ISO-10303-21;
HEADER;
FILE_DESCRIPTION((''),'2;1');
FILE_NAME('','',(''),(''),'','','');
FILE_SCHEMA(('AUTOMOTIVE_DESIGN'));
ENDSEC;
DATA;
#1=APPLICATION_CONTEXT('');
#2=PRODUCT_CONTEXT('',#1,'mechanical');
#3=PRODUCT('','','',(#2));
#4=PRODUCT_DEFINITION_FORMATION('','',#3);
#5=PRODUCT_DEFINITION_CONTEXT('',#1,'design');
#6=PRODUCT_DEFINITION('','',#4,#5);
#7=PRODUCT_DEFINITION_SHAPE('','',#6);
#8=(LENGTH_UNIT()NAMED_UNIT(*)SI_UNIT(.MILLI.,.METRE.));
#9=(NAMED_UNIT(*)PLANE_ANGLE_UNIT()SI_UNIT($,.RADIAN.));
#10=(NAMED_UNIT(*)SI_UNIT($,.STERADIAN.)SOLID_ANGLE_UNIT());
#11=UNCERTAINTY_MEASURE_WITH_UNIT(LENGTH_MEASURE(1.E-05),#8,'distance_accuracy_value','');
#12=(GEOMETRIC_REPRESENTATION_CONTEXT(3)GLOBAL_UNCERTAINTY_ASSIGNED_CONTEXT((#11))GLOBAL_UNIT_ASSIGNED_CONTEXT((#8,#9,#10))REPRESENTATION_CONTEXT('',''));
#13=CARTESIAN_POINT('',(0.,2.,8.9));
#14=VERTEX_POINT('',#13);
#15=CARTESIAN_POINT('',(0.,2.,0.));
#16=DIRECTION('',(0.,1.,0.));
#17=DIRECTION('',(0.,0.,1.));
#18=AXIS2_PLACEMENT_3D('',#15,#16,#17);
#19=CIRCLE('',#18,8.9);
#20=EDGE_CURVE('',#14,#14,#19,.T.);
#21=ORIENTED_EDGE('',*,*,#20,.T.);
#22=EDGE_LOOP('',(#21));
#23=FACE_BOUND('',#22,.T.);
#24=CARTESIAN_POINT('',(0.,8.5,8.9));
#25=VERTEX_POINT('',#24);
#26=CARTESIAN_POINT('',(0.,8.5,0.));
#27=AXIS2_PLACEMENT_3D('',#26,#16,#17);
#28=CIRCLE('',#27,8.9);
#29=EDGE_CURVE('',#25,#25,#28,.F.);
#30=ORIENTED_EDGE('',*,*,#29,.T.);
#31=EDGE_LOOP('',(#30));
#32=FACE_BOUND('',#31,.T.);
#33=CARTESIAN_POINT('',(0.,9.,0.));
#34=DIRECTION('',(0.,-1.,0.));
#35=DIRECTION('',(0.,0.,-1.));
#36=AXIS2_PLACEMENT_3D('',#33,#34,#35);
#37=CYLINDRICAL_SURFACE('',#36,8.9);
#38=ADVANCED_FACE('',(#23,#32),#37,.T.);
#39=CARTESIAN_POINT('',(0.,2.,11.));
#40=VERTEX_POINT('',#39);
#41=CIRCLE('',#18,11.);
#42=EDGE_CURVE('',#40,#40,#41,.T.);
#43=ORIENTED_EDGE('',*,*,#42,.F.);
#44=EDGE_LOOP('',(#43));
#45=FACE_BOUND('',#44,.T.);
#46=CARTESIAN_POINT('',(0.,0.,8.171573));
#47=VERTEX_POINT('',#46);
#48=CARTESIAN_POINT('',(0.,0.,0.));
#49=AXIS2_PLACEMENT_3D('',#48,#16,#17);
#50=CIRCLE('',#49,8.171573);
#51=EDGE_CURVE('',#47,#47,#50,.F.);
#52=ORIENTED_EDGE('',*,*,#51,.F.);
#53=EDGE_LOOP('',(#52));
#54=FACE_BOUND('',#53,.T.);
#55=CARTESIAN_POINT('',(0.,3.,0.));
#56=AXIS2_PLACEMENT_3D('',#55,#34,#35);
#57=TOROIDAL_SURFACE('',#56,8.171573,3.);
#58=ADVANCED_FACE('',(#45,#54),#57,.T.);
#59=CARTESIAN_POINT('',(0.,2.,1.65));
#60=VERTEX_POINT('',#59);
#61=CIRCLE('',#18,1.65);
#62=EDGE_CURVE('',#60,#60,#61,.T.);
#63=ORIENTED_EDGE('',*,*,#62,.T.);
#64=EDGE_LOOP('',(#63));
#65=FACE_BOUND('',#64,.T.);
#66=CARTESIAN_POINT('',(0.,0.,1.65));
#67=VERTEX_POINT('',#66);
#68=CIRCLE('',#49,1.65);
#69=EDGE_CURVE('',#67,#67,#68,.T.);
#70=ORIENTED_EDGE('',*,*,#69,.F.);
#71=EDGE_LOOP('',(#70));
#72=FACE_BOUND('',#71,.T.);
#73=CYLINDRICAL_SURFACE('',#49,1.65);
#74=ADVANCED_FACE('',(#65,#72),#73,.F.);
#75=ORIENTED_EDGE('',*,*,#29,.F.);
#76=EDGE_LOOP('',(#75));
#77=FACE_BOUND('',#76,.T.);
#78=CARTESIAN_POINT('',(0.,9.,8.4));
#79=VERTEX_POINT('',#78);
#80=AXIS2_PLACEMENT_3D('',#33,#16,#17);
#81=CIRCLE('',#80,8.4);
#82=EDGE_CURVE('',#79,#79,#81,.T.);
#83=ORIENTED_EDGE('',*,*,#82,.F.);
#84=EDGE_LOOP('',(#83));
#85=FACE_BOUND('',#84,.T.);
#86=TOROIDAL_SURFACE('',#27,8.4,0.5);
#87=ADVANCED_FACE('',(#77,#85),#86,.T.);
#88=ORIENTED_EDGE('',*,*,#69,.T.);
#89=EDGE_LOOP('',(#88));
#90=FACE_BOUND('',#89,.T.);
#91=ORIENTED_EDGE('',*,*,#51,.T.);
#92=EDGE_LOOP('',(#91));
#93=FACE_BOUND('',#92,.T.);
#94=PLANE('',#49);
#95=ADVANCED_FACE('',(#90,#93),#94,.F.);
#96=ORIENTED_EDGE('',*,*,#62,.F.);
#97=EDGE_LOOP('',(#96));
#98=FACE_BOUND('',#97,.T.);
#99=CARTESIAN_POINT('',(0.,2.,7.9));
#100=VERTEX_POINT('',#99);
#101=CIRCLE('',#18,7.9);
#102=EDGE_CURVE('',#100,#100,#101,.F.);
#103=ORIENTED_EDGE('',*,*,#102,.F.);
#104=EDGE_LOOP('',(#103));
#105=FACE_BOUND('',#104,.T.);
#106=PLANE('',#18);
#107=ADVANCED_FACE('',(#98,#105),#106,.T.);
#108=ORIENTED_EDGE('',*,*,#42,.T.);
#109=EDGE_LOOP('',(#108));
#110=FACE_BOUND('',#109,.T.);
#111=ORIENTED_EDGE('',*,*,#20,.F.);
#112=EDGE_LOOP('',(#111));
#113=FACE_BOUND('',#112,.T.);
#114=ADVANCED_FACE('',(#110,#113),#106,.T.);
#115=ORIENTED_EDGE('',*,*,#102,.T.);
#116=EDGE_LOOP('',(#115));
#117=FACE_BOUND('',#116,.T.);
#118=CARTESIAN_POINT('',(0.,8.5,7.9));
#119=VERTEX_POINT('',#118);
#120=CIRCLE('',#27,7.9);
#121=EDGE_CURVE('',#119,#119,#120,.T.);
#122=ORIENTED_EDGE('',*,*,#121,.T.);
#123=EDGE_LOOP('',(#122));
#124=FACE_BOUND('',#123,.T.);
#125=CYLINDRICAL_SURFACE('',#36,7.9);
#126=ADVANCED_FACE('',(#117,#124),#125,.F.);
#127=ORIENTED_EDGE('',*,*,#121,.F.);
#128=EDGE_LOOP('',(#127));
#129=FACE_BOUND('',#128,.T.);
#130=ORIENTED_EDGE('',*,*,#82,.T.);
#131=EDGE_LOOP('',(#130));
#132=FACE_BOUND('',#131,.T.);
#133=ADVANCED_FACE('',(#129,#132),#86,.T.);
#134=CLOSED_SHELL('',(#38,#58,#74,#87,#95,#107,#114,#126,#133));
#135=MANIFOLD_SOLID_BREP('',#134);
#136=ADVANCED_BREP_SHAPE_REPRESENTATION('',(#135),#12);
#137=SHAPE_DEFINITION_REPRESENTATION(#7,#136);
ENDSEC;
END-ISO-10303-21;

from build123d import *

# Parameters (mm, degrees)
SKETCH1_R           = 11
BOSS_EXTRUDE1_DEPTH = 2
SKETCH2_R           = 8.9
SKETCH2_R_2         = 7.9
BOSS_EXTRUDE2_DEPTH = 7
SKETCH3_R           = 1.65
CUT_EXTRUDE1_DEPTH  = 18.058722109
FILLET1_R           = 3
FILLET2_R           = 0.5


# Some blends are built 0.0001 mm under size
with BuildPart() as part:
    # Sketch1 → Boss-Extrude1 (new body)
    with BuildSketch(Plane(origin=(0, 0, 0), x_dir=(1, 0, 0), z_dir=(0, 1, 0))):
        with Locations(Location((0, 0, 0), (0, 0, 270))):
            Circle(SKETCH1_R)
    extrude(amount=BOSS_EXTRUDE1_DEPTH)

    # Sketch2 → Boss-Extrude2 (add)
    with BuildSketch(Plane(origin=(0, 2, 0), x_dir=(1, 0, 0), z_dir=(0, 1, 0))):
        with Locations(Location((0, 0, 0), (0, 0, 270))):
            Circle(SKETCH2_R)
        with Locations(Location((0, 0, 0), (0, 0, 270))):
            Circle(SKETCH2_R_2, mode=Mode.SUBTRACT)
    extrude(amount=BOSS_EXTRUDE2_DEPTH)

    # Sketch3 → Cut-Extrude1 (cut, through all)
    with BuildSketch(Plane(origin=(0, 2, 0), x_dir=(1, 0, 0), z_dir=(0, 1, 0))):
        with Locations(Location((0, 0, 0), (0, 0, 270))):
            Circle(SKETCH3_R)
    extrude(amount=-CUT_EXTRUDE1_DEPTH, mode=Mode.SUBTRACT)

    # Fillet1
    # the kernel refuses this fillet: 3 mm, written as the material it takes off along each edge
    with BuildSketch(Plane(origin=(0, 0, 0), x_dir=(0, 0, 1), z_dir=(-1, 0, 0))) as fillet1_piece_1:
        with BuildLine():
            CenterArc((8.171572875, 3), FILLET1_R, 270, 70.528779366)
            Line((8.171572875, 0), (8.171572875, -0.06))
            Line((8.171572875, -0.06), (11, -0.06))
            Line((11, -0.06), (11.06, 0))
            ThreePointArc((11.06, 0), (11.06, 1), (11.056568542, 1.98))
            Line((11.056568542, 1.98), (11, 2))
        make_face()
    revolve(axis=Axis((0, 0, 0), (0, 1, 0)), mode=Mode.SUBTRACT)

    # Fillet2
    fillet2_edges = [part.edges().sort_by_distance(p)[0] for p in [
        (0, 9, -8.9),
        (0, 9, -7.9),
    ]]
    fillet(fillet2_edges, radius=FILLET2_R - 0.0001)  # a hair under: the kernel refuses the full size


solid = part.part
